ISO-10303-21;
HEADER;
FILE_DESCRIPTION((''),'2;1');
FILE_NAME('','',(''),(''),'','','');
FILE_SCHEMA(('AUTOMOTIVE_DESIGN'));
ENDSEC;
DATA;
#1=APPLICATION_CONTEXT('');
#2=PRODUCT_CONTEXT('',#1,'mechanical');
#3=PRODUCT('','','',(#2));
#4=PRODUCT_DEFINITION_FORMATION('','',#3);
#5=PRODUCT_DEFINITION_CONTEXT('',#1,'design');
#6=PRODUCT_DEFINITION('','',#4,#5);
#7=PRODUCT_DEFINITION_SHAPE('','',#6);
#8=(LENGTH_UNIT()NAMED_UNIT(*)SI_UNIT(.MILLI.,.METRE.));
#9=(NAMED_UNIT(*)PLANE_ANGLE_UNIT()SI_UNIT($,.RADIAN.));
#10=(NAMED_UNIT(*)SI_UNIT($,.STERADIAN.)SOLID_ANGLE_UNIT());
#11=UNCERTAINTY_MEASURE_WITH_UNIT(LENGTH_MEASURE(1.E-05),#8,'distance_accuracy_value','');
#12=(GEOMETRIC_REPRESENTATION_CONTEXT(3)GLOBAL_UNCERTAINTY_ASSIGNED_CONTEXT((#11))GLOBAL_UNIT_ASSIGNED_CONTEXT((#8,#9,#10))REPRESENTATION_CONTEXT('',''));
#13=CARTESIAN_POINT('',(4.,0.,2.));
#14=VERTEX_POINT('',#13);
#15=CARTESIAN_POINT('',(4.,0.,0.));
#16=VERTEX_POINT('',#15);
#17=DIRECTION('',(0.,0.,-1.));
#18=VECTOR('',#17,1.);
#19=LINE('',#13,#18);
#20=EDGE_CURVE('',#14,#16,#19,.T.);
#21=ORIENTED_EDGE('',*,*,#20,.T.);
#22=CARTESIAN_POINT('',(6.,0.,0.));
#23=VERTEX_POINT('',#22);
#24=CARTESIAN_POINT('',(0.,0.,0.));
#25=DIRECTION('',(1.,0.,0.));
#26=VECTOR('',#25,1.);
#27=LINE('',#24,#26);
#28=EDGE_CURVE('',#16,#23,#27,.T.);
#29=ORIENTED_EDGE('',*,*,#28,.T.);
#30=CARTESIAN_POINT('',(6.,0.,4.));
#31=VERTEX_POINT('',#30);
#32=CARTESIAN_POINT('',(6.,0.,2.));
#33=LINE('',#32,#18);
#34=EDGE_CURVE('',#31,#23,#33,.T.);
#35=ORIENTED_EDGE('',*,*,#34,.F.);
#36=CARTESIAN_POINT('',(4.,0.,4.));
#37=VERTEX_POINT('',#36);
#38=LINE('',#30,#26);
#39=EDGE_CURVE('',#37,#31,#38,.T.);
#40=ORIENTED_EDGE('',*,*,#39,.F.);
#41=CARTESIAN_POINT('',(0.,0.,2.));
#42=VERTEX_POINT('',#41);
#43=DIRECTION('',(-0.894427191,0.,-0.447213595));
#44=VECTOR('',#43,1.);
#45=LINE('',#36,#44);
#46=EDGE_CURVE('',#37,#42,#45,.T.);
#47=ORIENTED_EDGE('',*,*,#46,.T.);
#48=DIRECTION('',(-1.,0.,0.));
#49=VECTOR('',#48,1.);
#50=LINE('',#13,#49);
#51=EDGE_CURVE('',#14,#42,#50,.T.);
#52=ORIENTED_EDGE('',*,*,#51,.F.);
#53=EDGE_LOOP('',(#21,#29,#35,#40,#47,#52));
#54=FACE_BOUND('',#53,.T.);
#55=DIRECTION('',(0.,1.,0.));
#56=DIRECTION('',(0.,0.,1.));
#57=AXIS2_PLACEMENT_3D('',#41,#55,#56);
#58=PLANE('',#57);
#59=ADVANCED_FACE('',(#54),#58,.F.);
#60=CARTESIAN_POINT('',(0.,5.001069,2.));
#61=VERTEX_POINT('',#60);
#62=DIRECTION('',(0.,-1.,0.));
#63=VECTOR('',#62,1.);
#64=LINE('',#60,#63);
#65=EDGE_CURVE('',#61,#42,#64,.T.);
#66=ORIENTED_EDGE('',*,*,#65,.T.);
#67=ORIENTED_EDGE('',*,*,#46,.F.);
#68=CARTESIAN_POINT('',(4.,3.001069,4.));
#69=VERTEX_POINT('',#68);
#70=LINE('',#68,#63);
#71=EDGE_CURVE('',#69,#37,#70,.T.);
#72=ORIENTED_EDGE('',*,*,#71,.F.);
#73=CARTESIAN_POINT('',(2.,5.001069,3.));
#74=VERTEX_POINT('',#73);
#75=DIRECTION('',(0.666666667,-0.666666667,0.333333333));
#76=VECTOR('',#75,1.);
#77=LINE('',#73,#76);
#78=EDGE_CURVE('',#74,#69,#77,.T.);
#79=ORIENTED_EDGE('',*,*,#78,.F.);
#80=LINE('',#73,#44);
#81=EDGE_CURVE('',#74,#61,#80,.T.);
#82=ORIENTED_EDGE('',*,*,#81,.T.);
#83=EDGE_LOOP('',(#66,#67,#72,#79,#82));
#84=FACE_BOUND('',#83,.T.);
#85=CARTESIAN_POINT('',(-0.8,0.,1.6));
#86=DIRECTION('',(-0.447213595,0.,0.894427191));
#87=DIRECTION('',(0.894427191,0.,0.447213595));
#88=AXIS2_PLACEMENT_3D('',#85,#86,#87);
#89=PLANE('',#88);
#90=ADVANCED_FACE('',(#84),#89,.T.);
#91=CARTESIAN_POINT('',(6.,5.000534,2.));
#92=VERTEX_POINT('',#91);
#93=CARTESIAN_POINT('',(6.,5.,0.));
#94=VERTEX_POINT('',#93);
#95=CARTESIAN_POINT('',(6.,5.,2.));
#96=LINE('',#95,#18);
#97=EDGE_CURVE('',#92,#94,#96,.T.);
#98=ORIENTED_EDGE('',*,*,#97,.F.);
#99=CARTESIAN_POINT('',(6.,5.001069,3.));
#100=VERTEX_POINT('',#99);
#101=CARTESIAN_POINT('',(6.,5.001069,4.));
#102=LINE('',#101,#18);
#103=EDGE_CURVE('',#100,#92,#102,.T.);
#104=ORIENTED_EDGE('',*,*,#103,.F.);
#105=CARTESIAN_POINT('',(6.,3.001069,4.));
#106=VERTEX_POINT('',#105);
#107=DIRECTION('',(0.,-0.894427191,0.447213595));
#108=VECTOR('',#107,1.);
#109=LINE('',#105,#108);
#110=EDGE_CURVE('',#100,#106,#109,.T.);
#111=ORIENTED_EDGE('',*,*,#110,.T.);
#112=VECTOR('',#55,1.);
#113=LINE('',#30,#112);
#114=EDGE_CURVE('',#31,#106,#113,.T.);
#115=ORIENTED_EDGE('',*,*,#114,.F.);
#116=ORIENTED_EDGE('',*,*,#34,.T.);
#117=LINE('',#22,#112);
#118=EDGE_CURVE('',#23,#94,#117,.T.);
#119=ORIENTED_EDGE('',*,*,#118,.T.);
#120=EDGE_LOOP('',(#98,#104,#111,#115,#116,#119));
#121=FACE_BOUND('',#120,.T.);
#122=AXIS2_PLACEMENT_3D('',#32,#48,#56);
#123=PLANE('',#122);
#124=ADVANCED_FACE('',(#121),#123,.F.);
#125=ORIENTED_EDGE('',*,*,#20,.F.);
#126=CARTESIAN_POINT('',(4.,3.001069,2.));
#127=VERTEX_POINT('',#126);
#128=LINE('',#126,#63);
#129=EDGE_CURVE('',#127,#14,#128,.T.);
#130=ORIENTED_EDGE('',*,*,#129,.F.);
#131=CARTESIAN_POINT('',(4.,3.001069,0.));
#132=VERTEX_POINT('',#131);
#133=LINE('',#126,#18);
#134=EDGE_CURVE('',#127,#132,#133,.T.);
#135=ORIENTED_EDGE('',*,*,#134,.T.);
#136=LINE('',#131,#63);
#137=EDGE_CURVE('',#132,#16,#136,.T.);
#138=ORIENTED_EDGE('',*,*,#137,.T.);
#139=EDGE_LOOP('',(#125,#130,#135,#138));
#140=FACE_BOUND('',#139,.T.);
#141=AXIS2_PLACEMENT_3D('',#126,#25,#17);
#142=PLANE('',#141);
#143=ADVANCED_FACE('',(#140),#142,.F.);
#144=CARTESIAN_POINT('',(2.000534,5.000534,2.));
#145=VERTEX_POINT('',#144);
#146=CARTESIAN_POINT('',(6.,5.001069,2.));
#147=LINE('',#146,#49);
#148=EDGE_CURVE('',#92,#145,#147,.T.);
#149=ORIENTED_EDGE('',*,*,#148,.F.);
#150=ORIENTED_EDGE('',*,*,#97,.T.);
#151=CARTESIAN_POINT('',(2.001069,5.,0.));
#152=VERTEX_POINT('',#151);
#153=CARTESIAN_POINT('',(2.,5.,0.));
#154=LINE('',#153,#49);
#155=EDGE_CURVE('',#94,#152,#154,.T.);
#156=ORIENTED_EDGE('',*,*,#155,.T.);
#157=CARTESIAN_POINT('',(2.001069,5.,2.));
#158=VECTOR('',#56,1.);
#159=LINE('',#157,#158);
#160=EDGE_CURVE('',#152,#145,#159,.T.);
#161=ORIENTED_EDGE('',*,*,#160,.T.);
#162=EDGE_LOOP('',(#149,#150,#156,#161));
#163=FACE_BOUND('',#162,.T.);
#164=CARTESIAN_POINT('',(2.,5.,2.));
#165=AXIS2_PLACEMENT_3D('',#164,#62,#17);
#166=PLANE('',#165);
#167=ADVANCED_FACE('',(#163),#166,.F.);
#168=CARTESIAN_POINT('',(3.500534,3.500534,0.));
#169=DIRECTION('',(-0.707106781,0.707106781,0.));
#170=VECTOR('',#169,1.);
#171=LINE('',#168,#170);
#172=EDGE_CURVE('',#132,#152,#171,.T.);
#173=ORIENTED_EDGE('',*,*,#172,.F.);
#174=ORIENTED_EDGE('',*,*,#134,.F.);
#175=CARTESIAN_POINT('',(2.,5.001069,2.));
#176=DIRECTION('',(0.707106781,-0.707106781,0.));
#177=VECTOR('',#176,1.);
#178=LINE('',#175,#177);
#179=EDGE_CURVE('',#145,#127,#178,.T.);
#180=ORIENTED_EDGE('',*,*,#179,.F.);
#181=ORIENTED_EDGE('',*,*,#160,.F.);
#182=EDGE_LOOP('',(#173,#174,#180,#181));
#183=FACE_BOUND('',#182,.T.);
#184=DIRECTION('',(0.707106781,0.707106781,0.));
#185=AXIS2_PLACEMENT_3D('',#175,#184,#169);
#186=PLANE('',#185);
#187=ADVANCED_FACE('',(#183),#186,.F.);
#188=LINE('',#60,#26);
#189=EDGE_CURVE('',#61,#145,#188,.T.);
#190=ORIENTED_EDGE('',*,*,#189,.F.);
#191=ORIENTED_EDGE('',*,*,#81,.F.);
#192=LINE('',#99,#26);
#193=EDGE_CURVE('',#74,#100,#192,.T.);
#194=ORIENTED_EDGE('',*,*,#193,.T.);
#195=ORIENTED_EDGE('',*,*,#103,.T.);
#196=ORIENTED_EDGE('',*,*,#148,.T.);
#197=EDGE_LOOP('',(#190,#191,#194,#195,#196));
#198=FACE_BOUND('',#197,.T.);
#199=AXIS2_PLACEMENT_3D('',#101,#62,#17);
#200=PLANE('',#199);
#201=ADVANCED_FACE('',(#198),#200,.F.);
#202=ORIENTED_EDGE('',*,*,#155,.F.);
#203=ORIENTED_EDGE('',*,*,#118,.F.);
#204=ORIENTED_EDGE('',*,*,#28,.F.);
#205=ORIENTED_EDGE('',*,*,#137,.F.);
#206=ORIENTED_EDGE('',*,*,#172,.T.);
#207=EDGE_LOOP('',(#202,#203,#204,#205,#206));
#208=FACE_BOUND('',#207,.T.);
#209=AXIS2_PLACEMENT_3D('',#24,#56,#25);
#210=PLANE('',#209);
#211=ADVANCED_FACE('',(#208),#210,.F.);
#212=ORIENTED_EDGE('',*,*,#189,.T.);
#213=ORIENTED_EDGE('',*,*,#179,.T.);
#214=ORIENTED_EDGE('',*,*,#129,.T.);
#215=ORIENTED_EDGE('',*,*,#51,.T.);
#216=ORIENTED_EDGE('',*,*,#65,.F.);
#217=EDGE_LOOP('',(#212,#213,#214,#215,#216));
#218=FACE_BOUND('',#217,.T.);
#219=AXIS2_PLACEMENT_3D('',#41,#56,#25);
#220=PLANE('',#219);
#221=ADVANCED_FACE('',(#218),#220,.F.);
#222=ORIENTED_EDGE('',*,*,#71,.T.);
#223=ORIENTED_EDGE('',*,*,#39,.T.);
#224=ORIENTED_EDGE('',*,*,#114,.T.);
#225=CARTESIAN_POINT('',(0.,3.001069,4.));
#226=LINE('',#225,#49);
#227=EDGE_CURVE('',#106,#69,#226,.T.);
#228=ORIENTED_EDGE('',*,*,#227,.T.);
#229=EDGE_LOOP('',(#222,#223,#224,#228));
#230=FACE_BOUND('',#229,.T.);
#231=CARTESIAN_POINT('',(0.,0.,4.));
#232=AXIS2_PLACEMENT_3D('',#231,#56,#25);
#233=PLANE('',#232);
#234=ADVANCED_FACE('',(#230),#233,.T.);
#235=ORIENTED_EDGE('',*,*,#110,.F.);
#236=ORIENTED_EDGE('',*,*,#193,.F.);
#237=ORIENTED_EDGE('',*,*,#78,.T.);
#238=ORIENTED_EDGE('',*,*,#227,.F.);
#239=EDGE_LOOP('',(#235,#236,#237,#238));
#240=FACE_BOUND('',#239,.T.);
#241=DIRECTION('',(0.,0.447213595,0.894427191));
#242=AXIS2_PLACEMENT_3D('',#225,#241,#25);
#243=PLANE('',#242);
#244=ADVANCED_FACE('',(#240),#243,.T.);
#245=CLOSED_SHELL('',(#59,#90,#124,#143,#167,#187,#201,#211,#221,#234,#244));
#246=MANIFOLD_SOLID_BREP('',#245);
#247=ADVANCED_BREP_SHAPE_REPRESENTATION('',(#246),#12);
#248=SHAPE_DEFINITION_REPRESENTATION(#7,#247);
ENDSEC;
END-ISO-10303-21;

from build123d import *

# Parameters (mm, degrees)
BOSS_EXTRUDE1_DEPTH = 2
SKETCH2_W           = 6
SKETCH2_H           = 5.001068762
BOSS_EXTRUDE2_DEPTH = 2
CHAMFER1_SIZE       = 1
CHAMFER1_SIZE2      = 2
CUT_EXTRUDE2_DEPTH  = 2
CUT_EXTRUDE3_DEPTH  = 2


with BuildPart() as part:
    # Sketch1 → Boss-Extrude1 (new body)
    with BuildSketch(Plane.XY):
        Polygon((0, 0), (6, 0), (6, 5), (2, 5), (0, 5), (0, 3), align=None)
    extrude(amount=BOSS_EXTRUDE1_DEPTH)

    # Sketch2 → Boss-Extrude2 (add)
    with BuildSketch(Plane.XY.offset(2)):
        with Locations((3, 2.500534381)):
            Rectangle(SKETCH2_W, SKETCH2_H)
    extrude(amount=BOSS_EXTRUDE2_DEPTH)

    # Chamfer1
    chamfer1_edges = [part.edges().sort_by_distance(p)[0] for p in [
        (3, 5.001068762, 4),
    ]]
    chamfer1_side = [part.faces().sort_by_distance(p)[0] for p in [
        (3, 5.001068762, 3),
    ]]
    chamfer(chamfer1_edges, length=CHAMFER1_SIZE, length2=CHAMFER1_SIZE2, reference=chamfer1_side[0])

    # 3DSketch1 → Cut-Extrude2 (cut, along a direction that is not the sketch's normal)
    with BuildSketch(Plane(origin=(2, 5.001068762, 3), x_dir=(0.36508333931807946, -0.9129034418767683, 0.18254166965903973), z_dir=(0.447213595499958, 0, -0.894427190999916))):
        Polygon((0, 0), (2.738515232, -1.224962989), (5.478201234, 0), (3.652784538, 4.082628306), (-0.912708348, 2.041314153), align=None)
    extrude(amount=-CUT_EXTRUDE2_DEPTH, dir=(0, 0, -1), mode=Mode.SUBTRACT)

    # Sketch4 → Cut-Extrude3 (cut)
    with BuildSketch(Plane(origin=(0, 0, 0), x_dir=(-1, 0, 0), z_dir=(0, 0, -1))):
        Polygon((0, 5.000534381), (-2, 5.001068762), (-4, 3.001068762), (-4, 0), (0, 0), align=None)
    extrude(amount=-CUT_EXTRUDE3_DEPTH, mode=Mode.SUBTRACT)


solid = part.part
